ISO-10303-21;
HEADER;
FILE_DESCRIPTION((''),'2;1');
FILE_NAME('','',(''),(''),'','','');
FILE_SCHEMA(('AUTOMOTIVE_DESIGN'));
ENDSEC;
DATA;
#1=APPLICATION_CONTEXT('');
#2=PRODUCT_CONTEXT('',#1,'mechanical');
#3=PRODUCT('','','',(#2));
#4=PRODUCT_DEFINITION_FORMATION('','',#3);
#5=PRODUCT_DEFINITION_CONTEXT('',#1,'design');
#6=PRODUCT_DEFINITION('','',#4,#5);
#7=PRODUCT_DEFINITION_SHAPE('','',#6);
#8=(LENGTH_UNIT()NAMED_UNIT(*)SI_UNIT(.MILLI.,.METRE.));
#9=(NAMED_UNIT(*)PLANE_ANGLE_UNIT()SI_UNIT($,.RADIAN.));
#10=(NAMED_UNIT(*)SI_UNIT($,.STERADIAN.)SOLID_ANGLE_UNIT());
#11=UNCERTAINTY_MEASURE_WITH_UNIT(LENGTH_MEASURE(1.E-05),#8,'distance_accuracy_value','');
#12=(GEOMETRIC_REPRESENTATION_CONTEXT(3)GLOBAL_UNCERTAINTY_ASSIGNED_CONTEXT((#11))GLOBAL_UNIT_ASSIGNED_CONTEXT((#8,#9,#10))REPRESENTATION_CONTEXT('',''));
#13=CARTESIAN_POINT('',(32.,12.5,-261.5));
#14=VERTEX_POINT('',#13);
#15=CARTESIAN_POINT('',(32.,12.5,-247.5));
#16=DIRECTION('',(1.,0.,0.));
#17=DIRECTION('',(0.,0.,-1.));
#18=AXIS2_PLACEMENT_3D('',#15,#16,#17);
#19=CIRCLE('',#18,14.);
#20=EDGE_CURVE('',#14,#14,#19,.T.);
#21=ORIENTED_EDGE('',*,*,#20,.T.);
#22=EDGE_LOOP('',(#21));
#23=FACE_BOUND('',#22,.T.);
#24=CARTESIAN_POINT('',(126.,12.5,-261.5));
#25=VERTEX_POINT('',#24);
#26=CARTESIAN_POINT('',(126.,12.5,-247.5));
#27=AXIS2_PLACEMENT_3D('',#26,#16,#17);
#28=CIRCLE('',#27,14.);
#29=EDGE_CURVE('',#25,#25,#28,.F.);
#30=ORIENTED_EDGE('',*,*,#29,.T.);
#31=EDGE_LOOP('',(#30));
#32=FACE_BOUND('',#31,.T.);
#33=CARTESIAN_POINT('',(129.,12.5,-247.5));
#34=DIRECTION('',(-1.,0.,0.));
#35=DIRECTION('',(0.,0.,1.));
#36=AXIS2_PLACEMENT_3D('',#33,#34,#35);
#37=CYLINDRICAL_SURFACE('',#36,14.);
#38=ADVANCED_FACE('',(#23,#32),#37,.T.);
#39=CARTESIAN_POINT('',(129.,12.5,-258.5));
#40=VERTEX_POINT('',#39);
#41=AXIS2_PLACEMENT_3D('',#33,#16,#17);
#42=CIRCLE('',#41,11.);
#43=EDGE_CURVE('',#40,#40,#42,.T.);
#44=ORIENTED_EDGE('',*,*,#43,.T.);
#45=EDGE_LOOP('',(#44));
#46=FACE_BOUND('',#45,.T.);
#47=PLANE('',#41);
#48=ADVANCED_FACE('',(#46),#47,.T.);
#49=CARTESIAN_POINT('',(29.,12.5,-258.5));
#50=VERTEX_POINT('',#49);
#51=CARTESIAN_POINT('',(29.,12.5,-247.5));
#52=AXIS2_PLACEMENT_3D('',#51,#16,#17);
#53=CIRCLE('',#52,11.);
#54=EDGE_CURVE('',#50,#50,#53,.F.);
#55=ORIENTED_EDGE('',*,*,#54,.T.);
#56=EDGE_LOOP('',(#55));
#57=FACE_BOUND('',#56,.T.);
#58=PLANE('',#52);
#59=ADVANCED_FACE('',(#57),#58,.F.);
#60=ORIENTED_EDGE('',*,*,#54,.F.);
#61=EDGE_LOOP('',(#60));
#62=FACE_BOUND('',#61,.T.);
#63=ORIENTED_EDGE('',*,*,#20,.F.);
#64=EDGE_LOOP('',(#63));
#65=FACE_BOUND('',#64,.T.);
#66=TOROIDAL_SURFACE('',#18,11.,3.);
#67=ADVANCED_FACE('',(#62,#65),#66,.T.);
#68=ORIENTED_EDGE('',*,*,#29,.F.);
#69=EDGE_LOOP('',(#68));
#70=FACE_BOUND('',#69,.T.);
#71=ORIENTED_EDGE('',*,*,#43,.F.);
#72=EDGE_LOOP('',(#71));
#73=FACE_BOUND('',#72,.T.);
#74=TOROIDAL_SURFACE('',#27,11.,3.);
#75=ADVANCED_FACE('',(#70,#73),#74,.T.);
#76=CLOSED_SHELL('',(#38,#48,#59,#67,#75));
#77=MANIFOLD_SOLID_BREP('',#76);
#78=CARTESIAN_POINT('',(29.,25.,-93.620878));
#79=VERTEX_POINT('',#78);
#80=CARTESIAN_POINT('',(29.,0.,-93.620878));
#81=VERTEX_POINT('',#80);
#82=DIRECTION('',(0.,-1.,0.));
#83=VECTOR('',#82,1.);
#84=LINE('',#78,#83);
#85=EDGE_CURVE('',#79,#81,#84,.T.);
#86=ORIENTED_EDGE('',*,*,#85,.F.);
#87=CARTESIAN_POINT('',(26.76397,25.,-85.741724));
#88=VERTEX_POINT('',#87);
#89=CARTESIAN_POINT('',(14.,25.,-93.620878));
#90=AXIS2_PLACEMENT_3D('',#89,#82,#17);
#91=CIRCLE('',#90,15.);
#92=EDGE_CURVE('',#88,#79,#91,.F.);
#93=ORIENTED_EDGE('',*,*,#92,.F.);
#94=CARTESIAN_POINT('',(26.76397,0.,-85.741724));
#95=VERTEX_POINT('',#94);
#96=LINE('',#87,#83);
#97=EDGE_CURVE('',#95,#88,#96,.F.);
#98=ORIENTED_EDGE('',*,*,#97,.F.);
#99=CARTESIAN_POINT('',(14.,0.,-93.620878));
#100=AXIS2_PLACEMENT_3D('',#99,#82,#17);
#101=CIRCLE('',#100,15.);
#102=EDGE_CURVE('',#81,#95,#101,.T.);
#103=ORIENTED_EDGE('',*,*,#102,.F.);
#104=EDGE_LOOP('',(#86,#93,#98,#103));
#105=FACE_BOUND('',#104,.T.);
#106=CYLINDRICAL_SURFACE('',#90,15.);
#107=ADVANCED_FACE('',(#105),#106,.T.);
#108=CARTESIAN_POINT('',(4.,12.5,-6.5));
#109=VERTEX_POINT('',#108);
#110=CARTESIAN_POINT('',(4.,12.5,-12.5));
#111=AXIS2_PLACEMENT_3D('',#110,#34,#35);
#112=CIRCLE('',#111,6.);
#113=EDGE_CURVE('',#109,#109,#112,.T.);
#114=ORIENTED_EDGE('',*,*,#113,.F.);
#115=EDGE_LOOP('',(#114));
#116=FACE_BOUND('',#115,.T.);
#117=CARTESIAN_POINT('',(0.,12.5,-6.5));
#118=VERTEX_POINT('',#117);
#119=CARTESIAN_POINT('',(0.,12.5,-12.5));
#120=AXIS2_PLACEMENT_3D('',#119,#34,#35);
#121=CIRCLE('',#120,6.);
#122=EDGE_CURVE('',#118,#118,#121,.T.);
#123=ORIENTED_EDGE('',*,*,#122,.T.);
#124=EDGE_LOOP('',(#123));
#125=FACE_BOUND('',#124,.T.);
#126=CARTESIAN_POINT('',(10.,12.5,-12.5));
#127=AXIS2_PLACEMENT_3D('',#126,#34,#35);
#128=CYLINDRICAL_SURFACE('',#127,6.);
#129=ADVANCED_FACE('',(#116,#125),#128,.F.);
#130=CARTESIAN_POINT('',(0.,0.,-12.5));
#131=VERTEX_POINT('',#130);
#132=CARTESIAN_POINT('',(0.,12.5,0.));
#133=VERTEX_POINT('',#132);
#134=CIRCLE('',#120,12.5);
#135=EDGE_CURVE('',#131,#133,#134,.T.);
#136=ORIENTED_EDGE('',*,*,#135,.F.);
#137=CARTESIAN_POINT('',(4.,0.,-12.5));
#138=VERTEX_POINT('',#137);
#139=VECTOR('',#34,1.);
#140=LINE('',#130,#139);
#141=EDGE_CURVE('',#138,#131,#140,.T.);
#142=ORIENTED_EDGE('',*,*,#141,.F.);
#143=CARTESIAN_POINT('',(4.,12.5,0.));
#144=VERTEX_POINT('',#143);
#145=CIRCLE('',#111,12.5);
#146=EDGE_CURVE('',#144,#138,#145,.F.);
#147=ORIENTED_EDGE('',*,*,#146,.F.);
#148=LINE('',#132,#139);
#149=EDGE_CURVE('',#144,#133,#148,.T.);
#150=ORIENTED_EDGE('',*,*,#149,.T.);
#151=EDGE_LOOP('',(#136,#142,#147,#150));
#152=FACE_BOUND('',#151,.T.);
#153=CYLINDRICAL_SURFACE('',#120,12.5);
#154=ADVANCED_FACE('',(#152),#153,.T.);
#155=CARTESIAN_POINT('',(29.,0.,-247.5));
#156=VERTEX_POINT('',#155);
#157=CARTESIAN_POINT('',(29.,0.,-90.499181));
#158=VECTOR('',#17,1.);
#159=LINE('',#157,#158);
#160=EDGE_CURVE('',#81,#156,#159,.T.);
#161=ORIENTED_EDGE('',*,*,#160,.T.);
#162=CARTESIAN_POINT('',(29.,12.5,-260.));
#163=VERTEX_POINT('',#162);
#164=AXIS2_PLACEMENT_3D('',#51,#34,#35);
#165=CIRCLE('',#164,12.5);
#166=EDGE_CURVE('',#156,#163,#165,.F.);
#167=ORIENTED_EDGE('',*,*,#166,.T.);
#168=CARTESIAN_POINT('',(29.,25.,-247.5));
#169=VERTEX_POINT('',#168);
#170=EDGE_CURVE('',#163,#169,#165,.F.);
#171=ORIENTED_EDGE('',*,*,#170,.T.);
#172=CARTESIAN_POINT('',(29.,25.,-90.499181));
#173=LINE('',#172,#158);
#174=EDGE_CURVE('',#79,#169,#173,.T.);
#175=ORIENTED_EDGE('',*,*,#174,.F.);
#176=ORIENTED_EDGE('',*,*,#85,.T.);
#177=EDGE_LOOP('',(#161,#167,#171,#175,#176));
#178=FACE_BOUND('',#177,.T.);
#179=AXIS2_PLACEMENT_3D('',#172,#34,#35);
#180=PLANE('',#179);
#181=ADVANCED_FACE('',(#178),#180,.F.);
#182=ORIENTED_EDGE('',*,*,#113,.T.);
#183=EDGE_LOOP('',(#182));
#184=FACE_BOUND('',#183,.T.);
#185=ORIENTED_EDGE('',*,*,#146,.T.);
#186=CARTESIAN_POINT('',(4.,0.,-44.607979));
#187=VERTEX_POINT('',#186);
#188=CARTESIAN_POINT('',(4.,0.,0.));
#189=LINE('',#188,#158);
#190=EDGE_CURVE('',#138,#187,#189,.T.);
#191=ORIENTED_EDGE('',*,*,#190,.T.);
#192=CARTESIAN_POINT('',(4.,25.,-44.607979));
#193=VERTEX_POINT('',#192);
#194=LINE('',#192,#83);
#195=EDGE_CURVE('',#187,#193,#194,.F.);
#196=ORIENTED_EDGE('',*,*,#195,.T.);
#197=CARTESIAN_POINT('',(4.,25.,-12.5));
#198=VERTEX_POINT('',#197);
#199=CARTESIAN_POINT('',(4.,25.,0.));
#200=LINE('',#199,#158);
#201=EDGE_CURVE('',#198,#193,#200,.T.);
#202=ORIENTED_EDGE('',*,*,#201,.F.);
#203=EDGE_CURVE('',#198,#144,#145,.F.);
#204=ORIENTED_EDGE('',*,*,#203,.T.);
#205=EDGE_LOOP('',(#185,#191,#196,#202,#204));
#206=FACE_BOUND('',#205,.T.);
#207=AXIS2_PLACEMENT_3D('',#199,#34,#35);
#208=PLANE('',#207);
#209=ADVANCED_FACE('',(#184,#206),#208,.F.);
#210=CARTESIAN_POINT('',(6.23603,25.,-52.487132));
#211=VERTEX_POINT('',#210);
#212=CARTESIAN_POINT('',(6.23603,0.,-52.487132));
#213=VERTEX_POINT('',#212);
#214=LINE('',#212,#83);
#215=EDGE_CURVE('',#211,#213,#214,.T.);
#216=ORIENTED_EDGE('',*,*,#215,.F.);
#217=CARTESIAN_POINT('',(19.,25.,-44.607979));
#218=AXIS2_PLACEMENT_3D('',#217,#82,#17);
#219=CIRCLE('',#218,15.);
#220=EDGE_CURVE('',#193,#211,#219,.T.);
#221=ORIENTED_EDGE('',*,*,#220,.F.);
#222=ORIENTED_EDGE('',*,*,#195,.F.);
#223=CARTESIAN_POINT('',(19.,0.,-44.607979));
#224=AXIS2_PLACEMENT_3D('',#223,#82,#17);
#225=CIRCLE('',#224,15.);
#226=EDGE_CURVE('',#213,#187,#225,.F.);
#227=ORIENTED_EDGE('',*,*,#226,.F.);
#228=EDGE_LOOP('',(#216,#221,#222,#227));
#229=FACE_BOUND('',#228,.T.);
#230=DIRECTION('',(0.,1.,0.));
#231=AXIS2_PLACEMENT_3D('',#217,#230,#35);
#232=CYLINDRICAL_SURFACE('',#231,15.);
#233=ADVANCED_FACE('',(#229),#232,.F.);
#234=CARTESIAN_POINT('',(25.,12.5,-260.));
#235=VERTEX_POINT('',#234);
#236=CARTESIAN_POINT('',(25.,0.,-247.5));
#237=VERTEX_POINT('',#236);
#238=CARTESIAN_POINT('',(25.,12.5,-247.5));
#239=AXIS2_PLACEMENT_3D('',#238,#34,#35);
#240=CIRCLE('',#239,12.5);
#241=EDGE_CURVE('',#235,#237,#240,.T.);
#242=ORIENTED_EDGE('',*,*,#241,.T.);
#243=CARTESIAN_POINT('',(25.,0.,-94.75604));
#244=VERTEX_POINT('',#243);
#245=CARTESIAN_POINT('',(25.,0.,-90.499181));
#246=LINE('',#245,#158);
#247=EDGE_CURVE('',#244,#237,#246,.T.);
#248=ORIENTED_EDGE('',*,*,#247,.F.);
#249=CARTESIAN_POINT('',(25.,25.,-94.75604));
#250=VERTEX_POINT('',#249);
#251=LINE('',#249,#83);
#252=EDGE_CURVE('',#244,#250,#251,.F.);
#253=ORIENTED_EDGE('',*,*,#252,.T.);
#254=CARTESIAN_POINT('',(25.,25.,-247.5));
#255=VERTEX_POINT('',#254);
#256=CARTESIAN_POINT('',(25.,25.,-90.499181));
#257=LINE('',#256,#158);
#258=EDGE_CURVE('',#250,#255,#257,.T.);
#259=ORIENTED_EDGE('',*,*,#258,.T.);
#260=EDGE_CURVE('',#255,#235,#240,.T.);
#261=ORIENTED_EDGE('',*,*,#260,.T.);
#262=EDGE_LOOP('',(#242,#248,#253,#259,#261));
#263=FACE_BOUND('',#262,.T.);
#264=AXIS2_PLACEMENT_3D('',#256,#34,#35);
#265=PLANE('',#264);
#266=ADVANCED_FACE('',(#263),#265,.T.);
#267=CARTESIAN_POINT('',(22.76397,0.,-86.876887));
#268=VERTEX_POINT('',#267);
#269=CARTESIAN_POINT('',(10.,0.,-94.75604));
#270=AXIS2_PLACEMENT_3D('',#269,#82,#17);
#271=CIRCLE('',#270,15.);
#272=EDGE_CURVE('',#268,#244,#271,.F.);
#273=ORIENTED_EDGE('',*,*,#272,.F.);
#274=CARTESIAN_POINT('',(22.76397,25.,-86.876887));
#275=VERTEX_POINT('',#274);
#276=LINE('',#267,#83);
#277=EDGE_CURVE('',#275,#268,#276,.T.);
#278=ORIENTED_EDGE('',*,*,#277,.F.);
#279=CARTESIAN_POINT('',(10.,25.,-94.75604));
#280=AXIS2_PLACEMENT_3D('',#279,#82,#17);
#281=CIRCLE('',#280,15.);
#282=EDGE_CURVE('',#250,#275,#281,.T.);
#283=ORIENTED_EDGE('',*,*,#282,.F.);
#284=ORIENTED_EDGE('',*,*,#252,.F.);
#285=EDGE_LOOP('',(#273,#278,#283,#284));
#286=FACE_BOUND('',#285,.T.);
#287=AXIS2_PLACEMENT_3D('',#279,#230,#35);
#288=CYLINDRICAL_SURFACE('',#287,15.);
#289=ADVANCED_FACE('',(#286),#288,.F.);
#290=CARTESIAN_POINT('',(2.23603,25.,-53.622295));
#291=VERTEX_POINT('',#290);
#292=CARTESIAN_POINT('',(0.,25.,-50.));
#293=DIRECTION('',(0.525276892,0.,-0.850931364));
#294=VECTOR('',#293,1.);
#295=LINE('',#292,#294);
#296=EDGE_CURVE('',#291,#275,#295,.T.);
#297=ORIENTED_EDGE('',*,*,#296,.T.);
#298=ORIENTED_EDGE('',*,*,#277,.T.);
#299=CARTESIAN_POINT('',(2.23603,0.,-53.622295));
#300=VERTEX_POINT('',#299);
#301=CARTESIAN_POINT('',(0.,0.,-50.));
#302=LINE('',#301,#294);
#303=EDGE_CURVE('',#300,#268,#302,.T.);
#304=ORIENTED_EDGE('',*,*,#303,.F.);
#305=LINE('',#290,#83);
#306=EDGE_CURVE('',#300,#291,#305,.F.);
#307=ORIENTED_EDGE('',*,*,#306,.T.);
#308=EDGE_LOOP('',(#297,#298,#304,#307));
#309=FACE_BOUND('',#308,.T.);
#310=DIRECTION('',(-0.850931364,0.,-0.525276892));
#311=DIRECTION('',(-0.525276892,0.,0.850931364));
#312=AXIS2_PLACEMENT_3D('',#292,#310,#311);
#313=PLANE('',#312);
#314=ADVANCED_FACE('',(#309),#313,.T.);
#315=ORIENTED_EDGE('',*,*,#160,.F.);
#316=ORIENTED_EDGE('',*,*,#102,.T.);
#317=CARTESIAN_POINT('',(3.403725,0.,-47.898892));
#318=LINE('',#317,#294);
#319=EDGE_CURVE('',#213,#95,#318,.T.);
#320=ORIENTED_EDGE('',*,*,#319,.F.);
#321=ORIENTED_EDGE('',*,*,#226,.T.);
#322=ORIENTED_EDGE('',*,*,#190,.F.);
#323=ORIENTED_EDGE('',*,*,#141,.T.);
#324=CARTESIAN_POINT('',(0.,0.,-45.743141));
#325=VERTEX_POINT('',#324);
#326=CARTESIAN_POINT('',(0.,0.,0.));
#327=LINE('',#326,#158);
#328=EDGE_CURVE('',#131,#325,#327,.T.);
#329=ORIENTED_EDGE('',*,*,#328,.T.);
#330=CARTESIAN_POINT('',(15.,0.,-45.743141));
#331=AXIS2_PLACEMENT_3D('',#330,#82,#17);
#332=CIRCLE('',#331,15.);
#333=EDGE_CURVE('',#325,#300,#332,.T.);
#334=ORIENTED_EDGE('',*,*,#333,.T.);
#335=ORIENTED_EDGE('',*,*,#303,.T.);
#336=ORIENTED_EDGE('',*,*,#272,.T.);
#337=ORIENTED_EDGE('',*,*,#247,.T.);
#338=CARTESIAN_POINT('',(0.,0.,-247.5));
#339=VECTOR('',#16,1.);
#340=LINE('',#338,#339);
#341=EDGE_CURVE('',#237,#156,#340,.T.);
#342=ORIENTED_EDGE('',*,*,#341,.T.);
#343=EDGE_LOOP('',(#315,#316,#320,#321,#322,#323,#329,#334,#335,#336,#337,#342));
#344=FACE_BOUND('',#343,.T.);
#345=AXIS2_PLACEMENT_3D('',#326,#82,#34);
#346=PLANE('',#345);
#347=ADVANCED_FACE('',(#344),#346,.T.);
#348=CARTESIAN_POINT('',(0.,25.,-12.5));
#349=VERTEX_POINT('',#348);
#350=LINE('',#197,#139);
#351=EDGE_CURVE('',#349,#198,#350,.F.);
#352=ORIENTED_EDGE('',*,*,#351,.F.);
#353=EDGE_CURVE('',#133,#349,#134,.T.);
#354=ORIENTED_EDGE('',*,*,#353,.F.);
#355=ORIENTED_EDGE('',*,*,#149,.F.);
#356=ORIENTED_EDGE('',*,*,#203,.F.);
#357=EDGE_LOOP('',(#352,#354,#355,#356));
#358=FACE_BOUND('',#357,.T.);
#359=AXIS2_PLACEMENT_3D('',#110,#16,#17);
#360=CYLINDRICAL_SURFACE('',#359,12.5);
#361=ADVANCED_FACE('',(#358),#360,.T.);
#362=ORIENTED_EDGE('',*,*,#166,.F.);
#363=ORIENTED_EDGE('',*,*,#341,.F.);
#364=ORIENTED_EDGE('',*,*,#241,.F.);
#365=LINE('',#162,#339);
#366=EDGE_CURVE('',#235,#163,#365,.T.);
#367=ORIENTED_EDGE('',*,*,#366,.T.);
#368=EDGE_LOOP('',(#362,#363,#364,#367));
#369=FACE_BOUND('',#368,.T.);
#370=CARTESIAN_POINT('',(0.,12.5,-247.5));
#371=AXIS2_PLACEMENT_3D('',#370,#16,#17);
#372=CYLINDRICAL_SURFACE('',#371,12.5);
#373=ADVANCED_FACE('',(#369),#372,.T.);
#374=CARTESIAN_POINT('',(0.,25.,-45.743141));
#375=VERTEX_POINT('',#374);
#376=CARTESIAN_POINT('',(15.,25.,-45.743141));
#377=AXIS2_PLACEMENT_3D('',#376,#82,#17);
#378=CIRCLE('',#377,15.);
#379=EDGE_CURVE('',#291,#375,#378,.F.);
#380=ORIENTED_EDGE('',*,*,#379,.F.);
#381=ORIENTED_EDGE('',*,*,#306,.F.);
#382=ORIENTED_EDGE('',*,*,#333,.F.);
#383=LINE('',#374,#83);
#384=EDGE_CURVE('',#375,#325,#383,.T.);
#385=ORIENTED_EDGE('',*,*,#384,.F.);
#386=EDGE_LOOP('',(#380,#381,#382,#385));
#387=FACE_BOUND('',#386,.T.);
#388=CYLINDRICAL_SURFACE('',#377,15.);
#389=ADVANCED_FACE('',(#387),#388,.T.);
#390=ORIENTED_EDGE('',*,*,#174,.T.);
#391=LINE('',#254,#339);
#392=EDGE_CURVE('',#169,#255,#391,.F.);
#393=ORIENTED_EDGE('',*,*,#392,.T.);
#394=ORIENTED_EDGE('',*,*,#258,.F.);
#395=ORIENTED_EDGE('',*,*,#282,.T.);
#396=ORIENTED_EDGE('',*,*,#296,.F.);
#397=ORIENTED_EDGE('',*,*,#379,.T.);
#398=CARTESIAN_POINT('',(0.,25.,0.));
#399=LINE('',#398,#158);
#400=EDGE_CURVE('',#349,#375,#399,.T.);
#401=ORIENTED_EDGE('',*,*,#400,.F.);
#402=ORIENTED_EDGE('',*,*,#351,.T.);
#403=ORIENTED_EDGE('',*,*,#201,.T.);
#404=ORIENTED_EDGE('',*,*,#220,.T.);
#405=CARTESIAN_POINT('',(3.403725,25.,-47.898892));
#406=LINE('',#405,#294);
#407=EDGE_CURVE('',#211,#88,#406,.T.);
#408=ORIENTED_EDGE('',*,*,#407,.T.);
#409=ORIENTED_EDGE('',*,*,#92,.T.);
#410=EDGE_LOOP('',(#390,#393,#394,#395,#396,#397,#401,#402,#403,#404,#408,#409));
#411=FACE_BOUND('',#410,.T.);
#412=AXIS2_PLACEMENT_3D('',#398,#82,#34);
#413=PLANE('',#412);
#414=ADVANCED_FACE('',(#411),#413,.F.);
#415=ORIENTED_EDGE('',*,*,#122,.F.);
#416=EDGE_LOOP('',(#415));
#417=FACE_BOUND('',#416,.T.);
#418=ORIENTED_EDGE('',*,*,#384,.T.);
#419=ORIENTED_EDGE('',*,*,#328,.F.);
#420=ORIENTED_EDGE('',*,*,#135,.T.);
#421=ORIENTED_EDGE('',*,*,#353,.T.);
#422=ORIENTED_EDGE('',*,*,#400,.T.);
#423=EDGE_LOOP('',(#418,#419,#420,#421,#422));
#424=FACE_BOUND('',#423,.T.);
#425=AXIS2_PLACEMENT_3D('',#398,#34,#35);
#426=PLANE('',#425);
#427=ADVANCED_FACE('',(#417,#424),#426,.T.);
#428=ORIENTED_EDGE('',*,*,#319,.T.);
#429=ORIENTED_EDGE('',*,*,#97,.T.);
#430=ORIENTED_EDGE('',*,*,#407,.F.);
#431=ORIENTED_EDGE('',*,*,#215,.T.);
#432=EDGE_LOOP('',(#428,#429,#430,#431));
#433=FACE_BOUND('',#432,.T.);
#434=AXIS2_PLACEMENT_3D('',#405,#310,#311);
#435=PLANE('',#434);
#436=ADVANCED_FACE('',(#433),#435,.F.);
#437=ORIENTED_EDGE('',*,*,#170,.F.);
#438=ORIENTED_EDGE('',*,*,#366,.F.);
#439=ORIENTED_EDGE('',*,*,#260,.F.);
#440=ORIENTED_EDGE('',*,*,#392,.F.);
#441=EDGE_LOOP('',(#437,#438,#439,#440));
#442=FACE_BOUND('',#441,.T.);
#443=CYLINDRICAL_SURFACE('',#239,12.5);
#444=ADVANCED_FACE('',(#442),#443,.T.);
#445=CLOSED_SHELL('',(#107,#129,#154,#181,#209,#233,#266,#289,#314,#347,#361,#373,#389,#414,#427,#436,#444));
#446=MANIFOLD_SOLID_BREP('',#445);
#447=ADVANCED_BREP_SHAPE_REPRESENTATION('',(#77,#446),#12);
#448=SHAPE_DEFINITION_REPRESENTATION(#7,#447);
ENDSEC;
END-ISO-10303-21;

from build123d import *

# Parameters (mm, degrees)
EXTRUDE_THIN1_DEPTH = 25
FILLET1_R           = 15
FILLET2_R           = 12.5
SKETCH2_R           = 6
CUT_EXTRUDE1_DEPTH  = 10
SKETCH3_R           = 14
BOSS_EXTRUDE1_DEPTH = 100
FILLET3_R           = 3


with BuildPart() as part:
    # Sketch1 → Extrude-Thin1 (new body)
    with BuildSketch(Plane(origin=(0, 0, 0), x_dir=(1, 0, 0), z_dir=(0, 1, 0))):
        Polygon((0, 0), (0, 50), (25, 90.499181326), (25, 260), (29, 260), (29, 89.364018992), (4, 48.864837665), (4, 0), align=None)
    extrude(amount=EXTRUDE_THIN1_DEPTH)

    # Fillet1
    fillet1_edges = [part.edges().sort_by_distance(p)[0] for p in [
        (29, 12.5, -89.364018992),
        (4, 12.5, -48.864837665),
        (0, 12.5, -50),
        (25, 12.5, -90.499181326),
    ]]
    fillet(fillet1_edges, radius=FILLET1_R)

    # Fillet2
    fillet2_edges = [part.edges().sort_by_distance(p)[0] for p in [
        (27, 0, -260),
        (27, 25, -260),
        (2, 0, 0),
        (2, 25, 0),
    ]]
    fillet(fillet2_edges, radius=FILLET2_R - 0.0001)  # a hair under: the kernel refuses the full size

    # Sketch2 → Cut-Extrude1 (cut)
    with BuildSketch(Plane.ZY):
        with Locations((-12.5, 12.5)):
            Circle(SKETCH2_R)
    extrude(amount=-CUT_EXTRUDE1_DEPTH, mode=Mode.SUBTRACT)


with BuildPart() as body_2:
    # Sketch3 → Boss-Extrude1 (new body)
    with BuildSketch(Plane(origin=(29, 0, 0), x_dir=(0, 0, -1), z_dir=(1, 0, 0))):
        with Locations((247.5, 12.5)):
            Circle(SKETCH3_R)
    extrude(amount=BOSS_EXTRUDE1_DEPTH)

    # Fillet3
    fillet3_edges = [body_2.edges().sort_by_distance(p)[0] for p in [
        (29, 12.5, -233.5),
        (129, 12.5, -233.5),
    ]]
    fillet(fillet3_edges, radius=FILLET3_R)


solid = Compound([part.part, body_2.part])
